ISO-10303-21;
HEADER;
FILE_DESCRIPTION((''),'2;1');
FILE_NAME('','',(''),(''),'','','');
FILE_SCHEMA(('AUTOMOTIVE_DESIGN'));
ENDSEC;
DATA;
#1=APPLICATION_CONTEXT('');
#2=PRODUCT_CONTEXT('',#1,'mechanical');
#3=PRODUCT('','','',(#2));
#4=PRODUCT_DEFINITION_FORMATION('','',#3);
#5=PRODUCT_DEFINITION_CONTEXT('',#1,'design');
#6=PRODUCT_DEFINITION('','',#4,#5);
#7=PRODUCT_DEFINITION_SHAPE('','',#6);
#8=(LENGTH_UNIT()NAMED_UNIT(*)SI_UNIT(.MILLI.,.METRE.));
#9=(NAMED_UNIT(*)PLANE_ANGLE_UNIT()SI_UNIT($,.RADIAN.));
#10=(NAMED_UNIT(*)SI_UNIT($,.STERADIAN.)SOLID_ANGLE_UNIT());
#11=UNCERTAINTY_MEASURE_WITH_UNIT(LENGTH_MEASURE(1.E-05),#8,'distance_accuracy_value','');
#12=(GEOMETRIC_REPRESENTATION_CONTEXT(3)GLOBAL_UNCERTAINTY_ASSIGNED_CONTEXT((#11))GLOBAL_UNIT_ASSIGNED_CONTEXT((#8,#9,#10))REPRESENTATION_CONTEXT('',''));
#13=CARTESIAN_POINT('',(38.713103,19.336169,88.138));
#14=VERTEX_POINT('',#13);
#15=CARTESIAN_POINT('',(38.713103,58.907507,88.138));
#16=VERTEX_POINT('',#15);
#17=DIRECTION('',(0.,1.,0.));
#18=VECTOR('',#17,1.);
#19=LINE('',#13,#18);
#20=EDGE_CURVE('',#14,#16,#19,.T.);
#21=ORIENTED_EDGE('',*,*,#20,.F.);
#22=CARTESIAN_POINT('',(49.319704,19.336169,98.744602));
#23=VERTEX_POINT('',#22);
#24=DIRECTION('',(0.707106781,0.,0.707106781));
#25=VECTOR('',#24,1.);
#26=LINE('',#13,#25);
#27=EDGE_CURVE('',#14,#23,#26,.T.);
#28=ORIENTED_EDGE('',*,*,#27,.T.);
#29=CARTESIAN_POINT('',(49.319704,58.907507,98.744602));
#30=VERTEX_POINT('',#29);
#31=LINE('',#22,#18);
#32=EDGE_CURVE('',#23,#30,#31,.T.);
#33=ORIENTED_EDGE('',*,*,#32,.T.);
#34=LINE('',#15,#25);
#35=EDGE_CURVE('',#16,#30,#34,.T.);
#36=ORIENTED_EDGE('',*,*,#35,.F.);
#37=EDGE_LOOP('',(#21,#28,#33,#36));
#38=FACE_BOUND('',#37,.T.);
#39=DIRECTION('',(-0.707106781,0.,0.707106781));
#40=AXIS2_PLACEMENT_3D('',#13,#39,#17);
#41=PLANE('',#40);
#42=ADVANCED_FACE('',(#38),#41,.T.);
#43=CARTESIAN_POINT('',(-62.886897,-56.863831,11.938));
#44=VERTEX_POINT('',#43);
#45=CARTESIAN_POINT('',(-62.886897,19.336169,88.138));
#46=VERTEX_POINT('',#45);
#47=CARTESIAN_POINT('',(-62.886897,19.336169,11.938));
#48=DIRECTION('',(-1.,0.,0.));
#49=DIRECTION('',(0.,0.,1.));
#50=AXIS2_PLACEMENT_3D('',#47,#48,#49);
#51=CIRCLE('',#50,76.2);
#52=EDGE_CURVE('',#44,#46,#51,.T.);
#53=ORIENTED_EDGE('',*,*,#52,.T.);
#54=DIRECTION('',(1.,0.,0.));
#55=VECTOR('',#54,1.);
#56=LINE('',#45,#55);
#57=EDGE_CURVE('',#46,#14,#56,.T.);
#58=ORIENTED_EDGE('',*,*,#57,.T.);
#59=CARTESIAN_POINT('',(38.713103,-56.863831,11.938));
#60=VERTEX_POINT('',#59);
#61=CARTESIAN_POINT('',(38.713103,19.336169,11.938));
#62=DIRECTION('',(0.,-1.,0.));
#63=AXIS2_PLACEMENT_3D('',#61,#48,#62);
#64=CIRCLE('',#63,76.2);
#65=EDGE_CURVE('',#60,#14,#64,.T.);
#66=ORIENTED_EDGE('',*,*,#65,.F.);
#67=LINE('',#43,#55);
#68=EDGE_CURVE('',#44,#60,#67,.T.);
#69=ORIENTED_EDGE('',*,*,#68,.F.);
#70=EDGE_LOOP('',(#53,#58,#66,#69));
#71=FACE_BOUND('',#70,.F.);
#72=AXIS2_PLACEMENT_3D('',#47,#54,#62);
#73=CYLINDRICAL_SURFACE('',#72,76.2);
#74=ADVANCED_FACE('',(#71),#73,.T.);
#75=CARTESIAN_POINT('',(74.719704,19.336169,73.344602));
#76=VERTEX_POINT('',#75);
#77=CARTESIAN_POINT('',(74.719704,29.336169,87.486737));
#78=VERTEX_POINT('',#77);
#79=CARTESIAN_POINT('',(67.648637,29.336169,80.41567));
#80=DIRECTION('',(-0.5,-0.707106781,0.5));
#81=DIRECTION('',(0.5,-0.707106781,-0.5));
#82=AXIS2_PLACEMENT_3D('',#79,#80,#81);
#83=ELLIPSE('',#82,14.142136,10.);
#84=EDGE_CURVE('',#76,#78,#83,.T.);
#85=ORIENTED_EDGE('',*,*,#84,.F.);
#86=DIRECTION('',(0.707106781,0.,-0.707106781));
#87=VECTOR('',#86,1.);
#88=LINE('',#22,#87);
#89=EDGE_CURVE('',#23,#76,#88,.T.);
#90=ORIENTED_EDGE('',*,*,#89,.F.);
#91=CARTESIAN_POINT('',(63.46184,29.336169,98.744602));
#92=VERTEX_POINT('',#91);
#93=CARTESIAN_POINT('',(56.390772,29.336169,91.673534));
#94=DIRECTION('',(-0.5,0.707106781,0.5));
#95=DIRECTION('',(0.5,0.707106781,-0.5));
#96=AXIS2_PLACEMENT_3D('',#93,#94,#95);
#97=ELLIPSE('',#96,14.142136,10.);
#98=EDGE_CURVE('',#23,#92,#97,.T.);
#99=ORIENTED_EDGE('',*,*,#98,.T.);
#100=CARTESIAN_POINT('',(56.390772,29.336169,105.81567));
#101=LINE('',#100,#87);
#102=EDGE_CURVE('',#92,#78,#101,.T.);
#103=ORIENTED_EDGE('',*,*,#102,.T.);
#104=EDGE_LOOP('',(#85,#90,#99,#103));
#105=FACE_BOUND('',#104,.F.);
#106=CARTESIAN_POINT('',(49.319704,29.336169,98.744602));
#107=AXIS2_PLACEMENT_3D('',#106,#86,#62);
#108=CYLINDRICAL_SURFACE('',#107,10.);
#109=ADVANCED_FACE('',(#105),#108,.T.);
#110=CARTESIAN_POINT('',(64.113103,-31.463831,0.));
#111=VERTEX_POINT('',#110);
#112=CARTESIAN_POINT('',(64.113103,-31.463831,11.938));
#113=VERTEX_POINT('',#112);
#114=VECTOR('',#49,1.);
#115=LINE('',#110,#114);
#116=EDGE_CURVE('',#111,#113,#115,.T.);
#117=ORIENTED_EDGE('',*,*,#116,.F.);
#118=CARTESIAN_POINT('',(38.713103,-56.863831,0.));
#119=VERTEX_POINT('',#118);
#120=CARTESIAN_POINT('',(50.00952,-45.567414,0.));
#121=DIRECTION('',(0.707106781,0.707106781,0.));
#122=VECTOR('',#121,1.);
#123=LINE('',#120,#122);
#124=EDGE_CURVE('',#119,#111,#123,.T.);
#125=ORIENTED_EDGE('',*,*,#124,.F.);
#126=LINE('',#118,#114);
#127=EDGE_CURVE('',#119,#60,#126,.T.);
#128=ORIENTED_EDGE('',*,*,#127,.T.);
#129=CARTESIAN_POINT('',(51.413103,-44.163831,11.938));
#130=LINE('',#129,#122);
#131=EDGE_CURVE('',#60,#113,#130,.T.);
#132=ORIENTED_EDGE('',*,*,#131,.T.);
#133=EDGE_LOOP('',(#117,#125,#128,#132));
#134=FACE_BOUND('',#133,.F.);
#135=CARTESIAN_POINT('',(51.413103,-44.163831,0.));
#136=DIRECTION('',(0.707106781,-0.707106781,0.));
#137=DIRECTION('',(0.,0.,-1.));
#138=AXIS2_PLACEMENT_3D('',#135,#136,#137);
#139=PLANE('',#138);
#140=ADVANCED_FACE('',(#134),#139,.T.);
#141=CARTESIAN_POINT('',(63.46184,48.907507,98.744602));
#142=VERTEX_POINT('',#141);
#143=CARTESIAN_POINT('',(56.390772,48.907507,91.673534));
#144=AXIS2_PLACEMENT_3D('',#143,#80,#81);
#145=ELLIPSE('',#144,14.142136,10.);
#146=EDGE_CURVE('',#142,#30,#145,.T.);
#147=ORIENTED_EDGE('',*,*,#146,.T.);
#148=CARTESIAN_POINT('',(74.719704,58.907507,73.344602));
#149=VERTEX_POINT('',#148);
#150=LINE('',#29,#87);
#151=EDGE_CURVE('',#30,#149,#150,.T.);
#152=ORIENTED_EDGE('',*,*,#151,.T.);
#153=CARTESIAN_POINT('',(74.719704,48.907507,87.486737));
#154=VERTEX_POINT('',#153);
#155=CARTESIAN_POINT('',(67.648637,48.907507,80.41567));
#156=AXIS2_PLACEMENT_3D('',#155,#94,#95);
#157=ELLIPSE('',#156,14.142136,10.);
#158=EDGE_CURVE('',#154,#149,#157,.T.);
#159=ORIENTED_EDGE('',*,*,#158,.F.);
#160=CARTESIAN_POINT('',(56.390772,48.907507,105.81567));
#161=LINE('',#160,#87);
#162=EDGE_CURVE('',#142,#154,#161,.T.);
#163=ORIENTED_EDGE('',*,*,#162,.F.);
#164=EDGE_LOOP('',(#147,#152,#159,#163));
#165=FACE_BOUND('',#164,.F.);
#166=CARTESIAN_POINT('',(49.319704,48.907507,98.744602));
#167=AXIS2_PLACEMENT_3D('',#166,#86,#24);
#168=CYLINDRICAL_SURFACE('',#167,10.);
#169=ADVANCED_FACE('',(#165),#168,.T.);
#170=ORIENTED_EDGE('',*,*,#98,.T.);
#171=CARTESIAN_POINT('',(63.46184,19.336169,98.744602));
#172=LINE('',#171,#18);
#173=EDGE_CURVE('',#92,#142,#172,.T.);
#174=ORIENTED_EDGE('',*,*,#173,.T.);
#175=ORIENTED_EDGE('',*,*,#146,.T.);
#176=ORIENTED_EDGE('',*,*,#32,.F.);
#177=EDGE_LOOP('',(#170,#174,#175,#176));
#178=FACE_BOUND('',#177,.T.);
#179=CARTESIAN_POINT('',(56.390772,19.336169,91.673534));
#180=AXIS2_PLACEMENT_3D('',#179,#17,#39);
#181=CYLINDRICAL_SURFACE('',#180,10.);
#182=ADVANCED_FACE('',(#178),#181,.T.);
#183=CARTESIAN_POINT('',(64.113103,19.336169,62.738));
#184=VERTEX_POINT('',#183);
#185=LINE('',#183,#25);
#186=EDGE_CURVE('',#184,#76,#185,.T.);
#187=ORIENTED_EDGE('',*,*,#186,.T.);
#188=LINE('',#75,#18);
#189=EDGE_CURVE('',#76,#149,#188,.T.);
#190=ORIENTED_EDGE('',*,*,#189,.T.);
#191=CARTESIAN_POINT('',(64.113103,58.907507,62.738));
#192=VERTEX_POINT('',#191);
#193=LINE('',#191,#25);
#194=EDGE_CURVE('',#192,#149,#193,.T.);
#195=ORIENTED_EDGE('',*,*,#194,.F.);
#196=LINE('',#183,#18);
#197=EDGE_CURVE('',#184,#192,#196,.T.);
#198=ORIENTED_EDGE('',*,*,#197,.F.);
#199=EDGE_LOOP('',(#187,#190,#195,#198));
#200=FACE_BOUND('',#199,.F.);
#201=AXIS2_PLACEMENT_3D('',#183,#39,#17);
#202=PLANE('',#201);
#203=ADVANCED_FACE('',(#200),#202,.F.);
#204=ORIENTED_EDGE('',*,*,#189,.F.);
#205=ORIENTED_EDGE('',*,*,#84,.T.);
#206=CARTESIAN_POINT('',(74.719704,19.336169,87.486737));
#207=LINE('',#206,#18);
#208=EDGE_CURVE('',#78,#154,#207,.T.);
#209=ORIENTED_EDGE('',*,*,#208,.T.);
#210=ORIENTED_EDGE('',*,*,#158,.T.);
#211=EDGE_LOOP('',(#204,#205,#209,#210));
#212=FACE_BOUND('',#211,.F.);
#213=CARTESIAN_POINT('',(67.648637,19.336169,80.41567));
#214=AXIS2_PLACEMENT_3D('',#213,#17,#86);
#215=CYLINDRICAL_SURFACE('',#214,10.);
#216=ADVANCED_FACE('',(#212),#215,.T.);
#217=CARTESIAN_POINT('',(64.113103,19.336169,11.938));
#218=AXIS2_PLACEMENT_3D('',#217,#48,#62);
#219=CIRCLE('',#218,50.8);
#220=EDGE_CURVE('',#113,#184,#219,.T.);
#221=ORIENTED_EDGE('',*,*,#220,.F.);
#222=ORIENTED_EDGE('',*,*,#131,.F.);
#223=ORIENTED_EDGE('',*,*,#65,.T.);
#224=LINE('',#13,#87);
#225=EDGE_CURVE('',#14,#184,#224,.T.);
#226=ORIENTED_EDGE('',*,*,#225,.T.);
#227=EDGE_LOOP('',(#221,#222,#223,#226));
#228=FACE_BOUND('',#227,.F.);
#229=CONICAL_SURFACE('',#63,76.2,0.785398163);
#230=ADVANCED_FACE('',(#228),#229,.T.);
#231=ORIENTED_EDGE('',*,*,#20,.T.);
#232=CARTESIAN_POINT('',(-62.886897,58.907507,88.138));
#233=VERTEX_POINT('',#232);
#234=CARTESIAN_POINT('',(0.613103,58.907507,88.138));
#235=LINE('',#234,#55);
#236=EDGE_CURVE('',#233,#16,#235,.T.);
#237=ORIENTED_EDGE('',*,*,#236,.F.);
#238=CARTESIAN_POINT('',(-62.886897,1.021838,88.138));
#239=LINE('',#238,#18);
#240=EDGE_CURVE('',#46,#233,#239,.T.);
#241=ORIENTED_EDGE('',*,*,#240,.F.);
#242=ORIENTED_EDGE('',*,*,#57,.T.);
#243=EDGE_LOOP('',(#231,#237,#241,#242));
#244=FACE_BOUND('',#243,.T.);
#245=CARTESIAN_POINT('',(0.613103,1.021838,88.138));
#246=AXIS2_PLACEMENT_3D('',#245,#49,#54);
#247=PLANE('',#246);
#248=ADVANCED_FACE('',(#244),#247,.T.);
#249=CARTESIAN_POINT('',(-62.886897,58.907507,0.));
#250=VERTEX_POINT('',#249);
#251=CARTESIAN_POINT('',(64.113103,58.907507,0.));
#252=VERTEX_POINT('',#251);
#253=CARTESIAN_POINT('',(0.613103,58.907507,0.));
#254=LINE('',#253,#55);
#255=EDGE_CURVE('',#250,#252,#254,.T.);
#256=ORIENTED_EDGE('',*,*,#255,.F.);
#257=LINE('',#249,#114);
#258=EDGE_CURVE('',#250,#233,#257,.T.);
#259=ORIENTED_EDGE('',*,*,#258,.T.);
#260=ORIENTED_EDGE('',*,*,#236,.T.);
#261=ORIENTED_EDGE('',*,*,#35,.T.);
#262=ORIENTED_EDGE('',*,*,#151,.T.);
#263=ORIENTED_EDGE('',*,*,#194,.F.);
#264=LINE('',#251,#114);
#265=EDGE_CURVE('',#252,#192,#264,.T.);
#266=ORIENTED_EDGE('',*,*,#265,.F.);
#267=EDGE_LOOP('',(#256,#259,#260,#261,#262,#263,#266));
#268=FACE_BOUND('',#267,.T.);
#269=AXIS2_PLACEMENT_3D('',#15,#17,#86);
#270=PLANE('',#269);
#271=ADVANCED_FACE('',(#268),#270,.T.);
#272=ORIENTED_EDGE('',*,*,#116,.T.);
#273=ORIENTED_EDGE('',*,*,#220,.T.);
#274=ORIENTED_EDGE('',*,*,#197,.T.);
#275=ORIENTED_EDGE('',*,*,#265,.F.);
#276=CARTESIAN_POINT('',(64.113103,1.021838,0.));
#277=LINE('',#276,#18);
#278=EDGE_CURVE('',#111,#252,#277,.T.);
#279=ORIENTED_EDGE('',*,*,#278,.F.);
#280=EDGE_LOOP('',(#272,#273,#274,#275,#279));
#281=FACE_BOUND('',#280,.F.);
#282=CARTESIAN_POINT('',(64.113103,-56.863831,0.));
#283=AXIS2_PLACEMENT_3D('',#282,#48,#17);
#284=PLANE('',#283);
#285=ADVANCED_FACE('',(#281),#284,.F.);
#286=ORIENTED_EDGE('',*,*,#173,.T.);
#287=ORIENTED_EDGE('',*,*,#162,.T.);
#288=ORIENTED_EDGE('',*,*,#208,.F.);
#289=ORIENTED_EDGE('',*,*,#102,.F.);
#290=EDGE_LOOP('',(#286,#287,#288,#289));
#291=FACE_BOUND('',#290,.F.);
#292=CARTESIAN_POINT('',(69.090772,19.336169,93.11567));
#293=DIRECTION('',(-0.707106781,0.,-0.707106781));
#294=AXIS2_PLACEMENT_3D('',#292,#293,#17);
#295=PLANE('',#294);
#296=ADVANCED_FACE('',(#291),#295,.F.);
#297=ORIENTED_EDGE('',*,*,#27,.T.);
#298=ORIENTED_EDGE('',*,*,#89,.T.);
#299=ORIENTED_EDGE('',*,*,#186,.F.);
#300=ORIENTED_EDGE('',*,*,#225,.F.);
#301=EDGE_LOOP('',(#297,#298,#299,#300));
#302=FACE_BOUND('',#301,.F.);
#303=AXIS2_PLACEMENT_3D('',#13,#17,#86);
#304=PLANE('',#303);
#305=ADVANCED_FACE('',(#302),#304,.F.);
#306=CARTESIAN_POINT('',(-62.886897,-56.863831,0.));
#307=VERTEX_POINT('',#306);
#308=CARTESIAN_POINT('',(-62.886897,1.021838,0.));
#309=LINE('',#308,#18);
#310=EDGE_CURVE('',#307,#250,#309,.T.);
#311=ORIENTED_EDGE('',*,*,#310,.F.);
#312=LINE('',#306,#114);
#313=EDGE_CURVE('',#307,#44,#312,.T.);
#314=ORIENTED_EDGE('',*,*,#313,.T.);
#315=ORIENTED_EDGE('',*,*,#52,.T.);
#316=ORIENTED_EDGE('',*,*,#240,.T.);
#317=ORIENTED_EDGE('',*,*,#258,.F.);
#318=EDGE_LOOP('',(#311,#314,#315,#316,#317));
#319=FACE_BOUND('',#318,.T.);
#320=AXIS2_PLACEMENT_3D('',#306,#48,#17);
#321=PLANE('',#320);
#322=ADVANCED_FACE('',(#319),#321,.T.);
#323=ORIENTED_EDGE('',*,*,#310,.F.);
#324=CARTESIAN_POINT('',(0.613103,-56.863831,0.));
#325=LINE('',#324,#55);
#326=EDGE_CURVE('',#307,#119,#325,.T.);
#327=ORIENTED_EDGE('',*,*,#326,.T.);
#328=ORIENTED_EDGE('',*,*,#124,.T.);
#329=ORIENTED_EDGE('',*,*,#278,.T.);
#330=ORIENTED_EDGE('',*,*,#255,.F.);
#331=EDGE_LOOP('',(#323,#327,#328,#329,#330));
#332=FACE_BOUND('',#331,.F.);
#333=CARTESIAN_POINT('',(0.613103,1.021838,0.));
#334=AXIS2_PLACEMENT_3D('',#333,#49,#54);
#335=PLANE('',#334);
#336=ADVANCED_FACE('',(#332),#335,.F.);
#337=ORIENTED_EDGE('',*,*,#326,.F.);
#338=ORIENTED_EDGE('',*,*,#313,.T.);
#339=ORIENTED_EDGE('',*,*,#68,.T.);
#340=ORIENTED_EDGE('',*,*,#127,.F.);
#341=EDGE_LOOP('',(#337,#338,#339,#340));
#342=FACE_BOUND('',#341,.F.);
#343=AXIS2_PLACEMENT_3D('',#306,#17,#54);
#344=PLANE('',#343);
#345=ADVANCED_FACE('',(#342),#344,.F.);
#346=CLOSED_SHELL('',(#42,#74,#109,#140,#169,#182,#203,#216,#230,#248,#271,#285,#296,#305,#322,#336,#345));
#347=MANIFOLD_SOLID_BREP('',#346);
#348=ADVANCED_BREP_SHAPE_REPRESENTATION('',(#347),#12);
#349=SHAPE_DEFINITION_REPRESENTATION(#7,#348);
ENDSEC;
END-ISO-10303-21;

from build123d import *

# Parameters (mm, degrees)
F0_W     = 127
F0_H     = 115.7713381711
F1_DEPTH = 88.138
F2_R     = 76.2
F3_SIZE  = 25.4
F4_DEPTH = 25
F5_R     = 10


# Not quite as in the source:
# - a feature of the source that left no trace in its solid (it failed there, or was rolled back) is left out


with BuildPart() as f1:
    # F0 (on Top) → F1 (new body)
    with BuildSketch(Plane.XY):
        with Locations((0.6131026894, 1.0218378156)):
            Rectangle(F0_W, F0_H)
    extrude(amount=F1_DEPTH)

    # F2
    f2_edges = [f1.edges().sort_by_distance(p)[0] for p in [
        (0.613103, -56.863831, 88.138),
    ]]
    fillet(f2_edges, radius=F2_R)

    # F3
    f3_edges = [f1.edges().sort_by_distance(p)[0] for p in [
        (64.113103, 39.121838, 88.138),
        (64.113103, -56.863831, 5.969),
        (64.113103, -34.545368, 65.819537),
    ]]
    chamfer(f3_edges, length=F3_SIZE)

    # F4 (add): a face of the model
    f4_faces = [f1.faces().sort_by_distance(p)[0] for p in [
        (51.4131026894, 39.1218378156, 75.438),
    ]]
    extrude(f4_faces, amount=F4_DEPTH)

    # F5
    f5_edges = [f1.edges().sort_by_distance(p)[0] for p in [
        (69.090772, 58.907507, 93.11567),
        (69.090772, 19.336169, 93.11567),
        (56.390772, 39.121838, 105.81567),
        (81.790772, 39.121838, 80.41567),
    ]]
    fillet(f5_edges, radius=F5_R)


solid = f1.part
